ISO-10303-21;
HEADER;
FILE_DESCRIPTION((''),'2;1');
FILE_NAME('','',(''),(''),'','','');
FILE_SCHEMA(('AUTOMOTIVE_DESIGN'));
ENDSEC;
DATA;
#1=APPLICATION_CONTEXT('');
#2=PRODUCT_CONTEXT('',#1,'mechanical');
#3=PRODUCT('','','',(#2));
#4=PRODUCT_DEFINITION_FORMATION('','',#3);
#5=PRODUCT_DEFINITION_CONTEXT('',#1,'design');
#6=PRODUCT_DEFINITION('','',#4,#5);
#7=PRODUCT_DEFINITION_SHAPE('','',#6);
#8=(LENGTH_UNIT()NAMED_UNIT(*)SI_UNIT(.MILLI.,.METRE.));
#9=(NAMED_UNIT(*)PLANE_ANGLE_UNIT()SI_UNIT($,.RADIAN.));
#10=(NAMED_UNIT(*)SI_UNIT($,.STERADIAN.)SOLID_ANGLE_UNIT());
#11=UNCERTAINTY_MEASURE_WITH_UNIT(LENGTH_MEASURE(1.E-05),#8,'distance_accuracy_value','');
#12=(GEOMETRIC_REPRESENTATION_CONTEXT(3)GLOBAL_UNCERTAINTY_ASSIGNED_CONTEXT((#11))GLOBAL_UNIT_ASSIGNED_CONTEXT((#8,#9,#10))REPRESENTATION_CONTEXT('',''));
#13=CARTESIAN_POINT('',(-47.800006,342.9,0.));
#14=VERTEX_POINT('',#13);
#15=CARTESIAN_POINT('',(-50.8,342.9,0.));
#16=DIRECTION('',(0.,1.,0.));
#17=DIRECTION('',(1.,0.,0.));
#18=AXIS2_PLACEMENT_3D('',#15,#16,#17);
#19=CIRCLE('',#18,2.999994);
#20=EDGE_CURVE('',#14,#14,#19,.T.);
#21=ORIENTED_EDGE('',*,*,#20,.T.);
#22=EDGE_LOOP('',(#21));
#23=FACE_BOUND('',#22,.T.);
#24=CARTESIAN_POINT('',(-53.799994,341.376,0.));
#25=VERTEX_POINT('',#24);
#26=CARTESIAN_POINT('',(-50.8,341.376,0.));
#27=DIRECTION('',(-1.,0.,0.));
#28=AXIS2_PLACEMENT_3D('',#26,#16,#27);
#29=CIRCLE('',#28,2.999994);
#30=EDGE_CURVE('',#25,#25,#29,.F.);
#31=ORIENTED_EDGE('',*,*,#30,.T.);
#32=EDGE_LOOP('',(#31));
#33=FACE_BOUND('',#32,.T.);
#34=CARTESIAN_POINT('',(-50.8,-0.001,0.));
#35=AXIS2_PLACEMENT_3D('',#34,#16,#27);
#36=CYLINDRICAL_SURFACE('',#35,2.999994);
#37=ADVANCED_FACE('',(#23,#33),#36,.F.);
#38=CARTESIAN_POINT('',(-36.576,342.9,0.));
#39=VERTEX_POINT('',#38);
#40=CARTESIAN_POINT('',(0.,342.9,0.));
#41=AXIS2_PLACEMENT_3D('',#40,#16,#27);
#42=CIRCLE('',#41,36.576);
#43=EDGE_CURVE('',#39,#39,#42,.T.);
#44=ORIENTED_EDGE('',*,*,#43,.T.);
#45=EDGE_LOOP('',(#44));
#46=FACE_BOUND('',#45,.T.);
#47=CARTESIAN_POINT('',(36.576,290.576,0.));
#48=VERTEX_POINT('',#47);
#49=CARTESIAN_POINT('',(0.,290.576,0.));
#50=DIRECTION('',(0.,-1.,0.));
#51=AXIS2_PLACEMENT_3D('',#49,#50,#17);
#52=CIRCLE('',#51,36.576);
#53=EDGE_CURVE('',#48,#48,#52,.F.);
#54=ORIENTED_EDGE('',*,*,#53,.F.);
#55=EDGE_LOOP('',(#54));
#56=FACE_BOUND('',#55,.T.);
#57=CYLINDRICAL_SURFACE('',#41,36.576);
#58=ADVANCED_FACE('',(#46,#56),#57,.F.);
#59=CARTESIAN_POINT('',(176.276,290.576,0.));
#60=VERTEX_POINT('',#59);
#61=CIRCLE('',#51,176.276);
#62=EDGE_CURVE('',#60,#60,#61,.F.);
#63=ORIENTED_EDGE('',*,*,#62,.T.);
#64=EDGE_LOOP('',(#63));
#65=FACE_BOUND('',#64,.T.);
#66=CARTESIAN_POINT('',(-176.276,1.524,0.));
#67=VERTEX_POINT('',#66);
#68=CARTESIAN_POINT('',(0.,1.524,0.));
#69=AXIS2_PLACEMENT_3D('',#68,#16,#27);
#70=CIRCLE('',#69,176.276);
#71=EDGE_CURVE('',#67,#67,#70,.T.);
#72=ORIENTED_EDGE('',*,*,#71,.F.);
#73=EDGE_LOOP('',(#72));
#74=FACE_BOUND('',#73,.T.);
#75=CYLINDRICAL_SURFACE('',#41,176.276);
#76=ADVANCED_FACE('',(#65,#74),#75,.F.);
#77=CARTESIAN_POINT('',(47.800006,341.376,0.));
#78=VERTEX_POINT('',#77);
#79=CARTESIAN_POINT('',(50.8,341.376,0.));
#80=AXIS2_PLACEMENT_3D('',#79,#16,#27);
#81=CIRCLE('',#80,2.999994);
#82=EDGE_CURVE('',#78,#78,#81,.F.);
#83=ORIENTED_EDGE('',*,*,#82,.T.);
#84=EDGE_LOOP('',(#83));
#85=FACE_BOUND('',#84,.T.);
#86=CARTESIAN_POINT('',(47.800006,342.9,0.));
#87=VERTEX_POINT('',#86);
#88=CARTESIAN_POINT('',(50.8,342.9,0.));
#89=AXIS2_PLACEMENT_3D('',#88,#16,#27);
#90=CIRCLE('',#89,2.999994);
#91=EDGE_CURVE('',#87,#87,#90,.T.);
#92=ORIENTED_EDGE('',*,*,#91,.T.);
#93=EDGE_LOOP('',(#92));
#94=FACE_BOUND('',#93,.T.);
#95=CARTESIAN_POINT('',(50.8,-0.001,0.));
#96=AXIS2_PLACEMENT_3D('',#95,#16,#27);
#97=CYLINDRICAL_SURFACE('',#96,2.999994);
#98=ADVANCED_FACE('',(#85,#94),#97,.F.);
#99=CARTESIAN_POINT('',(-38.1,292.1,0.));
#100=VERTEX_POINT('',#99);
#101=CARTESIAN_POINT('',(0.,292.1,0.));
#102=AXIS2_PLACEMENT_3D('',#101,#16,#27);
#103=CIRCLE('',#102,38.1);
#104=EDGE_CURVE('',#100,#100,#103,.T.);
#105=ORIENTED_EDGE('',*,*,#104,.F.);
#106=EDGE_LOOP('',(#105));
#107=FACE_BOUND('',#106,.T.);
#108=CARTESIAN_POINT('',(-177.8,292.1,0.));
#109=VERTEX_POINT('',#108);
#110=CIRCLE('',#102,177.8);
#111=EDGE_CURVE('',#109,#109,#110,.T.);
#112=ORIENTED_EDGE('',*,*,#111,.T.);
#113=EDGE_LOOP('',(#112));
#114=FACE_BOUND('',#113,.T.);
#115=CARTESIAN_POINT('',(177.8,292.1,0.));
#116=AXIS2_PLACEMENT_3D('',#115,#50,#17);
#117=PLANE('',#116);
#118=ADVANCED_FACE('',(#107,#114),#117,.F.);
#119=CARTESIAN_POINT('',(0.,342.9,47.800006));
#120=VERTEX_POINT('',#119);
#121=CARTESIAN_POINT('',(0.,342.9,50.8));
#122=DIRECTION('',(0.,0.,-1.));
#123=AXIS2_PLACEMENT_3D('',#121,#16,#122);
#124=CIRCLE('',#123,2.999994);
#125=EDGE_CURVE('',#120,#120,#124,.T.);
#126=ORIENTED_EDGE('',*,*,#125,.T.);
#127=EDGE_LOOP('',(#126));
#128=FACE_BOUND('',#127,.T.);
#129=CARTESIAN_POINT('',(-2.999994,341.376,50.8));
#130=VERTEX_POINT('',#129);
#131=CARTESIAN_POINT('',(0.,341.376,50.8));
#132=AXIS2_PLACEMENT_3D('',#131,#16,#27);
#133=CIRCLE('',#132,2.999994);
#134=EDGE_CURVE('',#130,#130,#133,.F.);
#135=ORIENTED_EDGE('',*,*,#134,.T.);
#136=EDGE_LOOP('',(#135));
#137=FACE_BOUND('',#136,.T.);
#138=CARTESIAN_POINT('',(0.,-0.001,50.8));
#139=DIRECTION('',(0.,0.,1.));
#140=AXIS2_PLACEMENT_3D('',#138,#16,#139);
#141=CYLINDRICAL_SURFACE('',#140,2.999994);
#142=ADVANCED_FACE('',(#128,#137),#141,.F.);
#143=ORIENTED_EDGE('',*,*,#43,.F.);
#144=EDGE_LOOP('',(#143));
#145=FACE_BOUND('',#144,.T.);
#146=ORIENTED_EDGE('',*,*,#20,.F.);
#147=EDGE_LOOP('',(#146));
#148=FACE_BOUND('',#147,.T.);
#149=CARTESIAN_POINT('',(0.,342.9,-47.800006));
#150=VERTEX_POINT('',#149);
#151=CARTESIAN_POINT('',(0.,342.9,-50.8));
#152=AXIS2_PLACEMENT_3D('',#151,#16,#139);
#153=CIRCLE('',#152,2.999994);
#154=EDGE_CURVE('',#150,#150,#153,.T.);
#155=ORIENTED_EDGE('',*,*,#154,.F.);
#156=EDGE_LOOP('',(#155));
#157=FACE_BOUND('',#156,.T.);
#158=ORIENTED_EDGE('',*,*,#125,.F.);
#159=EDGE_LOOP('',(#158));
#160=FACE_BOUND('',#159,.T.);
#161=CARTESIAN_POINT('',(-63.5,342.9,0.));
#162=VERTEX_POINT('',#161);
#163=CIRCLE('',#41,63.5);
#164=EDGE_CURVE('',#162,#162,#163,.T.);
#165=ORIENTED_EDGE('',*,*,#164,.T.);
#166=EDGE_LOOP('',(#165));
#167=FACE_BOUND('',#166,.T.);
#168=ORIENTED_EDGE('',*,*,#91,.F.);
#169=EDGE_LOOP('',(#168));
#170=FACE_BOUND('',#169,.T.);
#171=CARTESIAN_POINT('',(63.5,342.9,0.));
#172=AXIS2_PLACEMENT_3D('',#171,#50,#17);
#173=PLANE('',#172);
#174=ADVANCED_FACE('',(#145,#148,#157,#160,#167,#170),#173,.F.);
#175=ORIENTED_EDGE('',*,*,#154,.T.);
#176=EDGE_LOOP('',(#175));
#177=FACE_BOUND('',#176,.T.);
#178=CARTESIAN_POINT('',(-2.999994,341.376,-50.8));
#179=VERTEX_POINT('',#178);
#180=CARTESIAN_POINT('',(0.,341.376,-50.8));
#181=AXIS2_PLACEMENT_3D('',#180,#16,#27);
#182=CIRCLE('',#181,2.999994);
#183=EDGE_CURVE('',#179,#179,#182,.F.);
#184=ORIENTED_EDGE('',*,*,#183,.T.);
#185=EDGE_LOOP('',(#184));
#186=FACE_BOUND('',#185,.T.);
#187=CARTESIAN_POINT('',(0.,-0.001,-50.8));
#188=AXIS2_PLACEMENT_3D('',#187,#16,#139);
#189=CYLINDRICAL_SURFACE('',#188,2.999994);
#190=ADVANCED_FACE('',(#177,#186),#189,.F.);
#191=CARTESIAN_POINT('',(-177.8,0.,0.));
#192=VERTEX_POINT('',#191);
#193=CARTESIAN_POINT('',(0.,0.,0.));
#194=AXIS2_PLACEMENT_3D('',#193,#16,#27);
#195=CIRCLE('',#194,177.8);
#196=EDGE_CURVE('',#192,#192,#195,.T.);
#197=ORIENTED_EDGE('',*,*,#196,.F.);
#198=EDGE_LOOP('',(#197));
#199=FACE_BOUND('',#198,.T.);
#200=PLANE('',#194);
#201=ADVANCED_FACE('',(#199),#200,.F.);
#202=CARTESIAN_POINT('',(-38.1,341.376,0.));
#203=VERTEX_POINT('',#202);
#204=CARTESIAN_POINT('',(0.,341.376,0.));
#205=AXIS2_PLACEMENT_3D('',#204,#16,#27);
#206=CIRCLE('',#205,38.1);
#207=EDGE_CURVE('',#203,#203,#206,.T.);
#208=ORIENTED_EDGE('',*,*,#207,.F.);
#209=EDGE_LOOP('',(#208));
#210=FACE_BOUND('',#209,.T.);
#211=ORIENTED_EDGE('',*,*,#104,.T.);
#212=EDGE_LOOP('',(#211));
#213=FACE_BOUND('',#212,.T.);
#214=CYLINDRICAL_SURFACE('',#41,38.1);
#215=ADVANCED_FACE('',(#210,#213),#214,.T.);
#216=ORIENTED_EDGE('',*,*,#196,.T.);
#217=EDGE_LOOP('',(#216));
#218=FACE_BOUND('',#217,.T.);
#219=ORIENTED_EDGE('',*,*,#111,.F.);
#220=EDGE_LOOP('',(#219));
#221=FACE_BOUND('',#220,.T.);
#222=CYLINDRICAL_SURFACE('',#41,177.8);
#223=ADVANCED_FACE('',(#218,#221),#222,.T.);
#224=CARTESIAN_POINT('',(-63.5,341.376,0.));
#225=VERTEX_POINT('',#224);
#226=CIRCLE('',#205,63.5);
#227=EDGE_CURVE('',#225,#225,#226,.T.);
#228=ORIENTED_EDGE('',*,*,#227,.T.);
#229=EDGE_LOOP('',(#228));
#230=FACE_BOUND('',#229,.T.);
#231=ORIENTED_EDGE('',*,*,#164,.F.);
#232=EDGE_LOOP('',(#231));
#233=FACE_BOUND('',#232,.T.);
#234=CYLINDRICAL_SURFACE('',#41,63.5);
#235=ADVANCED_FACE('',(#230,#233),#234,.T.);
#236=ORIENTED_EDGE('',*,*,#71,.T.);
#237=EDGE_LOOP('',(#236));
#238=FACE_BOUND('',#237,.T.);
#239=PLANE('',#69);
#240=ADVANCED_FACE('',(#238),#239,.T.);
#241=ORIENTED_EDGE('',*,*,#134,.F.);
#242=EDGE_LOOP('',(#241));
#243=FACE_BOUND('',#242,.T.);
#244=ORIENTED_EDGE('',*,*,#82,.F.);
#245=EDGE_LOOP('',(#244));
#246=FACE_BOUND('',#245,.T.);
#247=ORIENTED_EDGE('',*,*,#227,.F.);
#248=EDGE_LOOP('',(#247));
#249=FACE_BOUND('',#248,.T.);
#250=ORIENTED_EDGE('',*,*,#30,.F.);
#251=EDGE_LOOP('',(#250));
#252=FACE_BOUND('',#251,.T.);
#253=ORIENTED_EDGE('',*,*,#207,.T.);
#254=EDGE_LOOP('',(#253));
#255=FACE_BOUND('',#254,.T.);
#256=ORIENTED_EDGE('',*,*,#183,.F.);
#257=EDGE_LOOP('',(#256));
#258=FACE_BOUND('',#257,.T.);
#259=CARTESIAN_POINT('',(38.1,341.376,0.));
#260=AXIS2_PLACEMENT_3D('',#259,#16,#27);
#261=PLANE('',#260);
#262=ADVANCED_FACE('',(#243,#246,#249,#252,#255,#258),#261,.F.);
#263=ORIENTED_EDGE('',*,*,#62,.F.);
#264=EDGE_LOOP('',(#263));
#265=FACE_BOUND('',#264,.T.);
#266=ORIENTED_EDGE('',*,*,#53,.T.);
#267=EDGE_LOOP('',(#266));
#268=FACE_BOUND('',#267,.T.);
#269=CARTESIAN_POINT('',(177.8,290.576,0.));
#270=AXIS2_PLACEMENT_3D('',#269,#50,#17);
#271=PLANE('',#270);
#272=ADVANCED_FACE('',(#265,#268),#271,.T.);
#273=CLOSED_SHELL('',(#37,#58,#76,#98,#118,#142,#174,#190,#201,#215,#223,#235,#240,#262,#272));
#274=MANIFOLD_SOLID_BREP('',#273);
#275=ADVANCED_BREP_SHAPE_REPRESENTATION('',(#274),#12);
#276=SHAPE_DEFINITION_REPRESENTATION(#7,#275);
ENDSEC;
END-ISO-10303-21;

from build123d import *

# Parameters (mm, degrees)
SHELL2_START       = 1.524
SHELL2_OUTLINE_R   = 176.276
SHELL2_DEPTH       = 289.052
SHELL2_START_2     = 290.576
SHELL2_2_OUTLINE_R = 36.576
SHELL2_2_DEPTH     = 52.324
CUT_EXTRUDE1_REACH = 427.213
SKETCH2_R          = 2.999994
CIRPATTERN1_COUNT  = 4


# Read off the part's stored shape, not the designer's step: Shell2
with BuildPart() as part:
    # Sketch1 → Revolve1 (revolve)
    with BuildSketch(Plane.XY, mode=Mode.PRIVATE) as revolve1_sk:
        Polygon((0, 0), (177.8, 0), (177.8, 292.1), (38.1, 292.1), (38.1, 341.376), (63.5, 341.376), (63.5, 342.9), (0, 342.9), align=None)
    revolve(revolve1_sk.sketch.rotate(Axis((0, 342.9, 0), (0, -1, 0)), 180), axis=Axis((0, 342.9, 0), (0, -1, 0)))

    # Shell2 outline → Shell2 (cut)
    with BuildSketch(Plane(origin=(0, 0, 0), x_dir=(1, 0, 0), z_dir=(0, 1, 0)).offset(SHELL2_START)):
        Circle(SHELL2_OUTLINE_R)
    extrude(amount=SHELL2_DEPTH, mode=Mode.SUBTRACT)

    # Shell2 2 outline → Shell2 2 (cut)
    with BuildSketch(Plane(origin=(0, 0, 0), x_dir=(1, 0, 0), z_dir=(0, 1, 0)).offset(SHELL2_START_2)):
        Circle(SHELL2_2_OUTLINE_R)
    extrude(amount=SHELL2_2_DEPTH, mode=Mode.SUBTRACT)

    # Sketch2 → Cut-Extrude1 (cut, up to next)
    with BuildSketch(Plane(origin=(0, 342.9, 0), x_dir=(1, 0, 0), z_dir=(0, 1, 0)), mode=Mode.PRIVATE) as cut_extrude1_sk1:
        with Locations(Location((50.8, 0, 0), (0, 0, 180))):
            Circle(SKETCH2_R)
    cut_extrude1_tool1 = extrude(cut_extrude1_sk1.sketch, amount=-CUT_EXTRUDE1_REACH, mode=Mode.PRIVATE) & part.part
    cut_extrude1 = cut_extrude1_tool1.solids().sort_by_distance((50.8, 342.9, 0))[0]
    add(cut_extrude1, mode=Mode.SUBTRACT)

    # CirPattern1: Cut-Extrude1 ×4 about axis
    cirpattern1_axis = Axis((0, 0, 0), (0, 1, 0))
    for i in range(1, CIRPATTERN1_COUNT):
        add(cut_extrude1.rotate(cirpattern1_axis, i * 360 / CIRPATTERN1_COUNT), mode=Mode.SUBTRACT)


solid = part.part
